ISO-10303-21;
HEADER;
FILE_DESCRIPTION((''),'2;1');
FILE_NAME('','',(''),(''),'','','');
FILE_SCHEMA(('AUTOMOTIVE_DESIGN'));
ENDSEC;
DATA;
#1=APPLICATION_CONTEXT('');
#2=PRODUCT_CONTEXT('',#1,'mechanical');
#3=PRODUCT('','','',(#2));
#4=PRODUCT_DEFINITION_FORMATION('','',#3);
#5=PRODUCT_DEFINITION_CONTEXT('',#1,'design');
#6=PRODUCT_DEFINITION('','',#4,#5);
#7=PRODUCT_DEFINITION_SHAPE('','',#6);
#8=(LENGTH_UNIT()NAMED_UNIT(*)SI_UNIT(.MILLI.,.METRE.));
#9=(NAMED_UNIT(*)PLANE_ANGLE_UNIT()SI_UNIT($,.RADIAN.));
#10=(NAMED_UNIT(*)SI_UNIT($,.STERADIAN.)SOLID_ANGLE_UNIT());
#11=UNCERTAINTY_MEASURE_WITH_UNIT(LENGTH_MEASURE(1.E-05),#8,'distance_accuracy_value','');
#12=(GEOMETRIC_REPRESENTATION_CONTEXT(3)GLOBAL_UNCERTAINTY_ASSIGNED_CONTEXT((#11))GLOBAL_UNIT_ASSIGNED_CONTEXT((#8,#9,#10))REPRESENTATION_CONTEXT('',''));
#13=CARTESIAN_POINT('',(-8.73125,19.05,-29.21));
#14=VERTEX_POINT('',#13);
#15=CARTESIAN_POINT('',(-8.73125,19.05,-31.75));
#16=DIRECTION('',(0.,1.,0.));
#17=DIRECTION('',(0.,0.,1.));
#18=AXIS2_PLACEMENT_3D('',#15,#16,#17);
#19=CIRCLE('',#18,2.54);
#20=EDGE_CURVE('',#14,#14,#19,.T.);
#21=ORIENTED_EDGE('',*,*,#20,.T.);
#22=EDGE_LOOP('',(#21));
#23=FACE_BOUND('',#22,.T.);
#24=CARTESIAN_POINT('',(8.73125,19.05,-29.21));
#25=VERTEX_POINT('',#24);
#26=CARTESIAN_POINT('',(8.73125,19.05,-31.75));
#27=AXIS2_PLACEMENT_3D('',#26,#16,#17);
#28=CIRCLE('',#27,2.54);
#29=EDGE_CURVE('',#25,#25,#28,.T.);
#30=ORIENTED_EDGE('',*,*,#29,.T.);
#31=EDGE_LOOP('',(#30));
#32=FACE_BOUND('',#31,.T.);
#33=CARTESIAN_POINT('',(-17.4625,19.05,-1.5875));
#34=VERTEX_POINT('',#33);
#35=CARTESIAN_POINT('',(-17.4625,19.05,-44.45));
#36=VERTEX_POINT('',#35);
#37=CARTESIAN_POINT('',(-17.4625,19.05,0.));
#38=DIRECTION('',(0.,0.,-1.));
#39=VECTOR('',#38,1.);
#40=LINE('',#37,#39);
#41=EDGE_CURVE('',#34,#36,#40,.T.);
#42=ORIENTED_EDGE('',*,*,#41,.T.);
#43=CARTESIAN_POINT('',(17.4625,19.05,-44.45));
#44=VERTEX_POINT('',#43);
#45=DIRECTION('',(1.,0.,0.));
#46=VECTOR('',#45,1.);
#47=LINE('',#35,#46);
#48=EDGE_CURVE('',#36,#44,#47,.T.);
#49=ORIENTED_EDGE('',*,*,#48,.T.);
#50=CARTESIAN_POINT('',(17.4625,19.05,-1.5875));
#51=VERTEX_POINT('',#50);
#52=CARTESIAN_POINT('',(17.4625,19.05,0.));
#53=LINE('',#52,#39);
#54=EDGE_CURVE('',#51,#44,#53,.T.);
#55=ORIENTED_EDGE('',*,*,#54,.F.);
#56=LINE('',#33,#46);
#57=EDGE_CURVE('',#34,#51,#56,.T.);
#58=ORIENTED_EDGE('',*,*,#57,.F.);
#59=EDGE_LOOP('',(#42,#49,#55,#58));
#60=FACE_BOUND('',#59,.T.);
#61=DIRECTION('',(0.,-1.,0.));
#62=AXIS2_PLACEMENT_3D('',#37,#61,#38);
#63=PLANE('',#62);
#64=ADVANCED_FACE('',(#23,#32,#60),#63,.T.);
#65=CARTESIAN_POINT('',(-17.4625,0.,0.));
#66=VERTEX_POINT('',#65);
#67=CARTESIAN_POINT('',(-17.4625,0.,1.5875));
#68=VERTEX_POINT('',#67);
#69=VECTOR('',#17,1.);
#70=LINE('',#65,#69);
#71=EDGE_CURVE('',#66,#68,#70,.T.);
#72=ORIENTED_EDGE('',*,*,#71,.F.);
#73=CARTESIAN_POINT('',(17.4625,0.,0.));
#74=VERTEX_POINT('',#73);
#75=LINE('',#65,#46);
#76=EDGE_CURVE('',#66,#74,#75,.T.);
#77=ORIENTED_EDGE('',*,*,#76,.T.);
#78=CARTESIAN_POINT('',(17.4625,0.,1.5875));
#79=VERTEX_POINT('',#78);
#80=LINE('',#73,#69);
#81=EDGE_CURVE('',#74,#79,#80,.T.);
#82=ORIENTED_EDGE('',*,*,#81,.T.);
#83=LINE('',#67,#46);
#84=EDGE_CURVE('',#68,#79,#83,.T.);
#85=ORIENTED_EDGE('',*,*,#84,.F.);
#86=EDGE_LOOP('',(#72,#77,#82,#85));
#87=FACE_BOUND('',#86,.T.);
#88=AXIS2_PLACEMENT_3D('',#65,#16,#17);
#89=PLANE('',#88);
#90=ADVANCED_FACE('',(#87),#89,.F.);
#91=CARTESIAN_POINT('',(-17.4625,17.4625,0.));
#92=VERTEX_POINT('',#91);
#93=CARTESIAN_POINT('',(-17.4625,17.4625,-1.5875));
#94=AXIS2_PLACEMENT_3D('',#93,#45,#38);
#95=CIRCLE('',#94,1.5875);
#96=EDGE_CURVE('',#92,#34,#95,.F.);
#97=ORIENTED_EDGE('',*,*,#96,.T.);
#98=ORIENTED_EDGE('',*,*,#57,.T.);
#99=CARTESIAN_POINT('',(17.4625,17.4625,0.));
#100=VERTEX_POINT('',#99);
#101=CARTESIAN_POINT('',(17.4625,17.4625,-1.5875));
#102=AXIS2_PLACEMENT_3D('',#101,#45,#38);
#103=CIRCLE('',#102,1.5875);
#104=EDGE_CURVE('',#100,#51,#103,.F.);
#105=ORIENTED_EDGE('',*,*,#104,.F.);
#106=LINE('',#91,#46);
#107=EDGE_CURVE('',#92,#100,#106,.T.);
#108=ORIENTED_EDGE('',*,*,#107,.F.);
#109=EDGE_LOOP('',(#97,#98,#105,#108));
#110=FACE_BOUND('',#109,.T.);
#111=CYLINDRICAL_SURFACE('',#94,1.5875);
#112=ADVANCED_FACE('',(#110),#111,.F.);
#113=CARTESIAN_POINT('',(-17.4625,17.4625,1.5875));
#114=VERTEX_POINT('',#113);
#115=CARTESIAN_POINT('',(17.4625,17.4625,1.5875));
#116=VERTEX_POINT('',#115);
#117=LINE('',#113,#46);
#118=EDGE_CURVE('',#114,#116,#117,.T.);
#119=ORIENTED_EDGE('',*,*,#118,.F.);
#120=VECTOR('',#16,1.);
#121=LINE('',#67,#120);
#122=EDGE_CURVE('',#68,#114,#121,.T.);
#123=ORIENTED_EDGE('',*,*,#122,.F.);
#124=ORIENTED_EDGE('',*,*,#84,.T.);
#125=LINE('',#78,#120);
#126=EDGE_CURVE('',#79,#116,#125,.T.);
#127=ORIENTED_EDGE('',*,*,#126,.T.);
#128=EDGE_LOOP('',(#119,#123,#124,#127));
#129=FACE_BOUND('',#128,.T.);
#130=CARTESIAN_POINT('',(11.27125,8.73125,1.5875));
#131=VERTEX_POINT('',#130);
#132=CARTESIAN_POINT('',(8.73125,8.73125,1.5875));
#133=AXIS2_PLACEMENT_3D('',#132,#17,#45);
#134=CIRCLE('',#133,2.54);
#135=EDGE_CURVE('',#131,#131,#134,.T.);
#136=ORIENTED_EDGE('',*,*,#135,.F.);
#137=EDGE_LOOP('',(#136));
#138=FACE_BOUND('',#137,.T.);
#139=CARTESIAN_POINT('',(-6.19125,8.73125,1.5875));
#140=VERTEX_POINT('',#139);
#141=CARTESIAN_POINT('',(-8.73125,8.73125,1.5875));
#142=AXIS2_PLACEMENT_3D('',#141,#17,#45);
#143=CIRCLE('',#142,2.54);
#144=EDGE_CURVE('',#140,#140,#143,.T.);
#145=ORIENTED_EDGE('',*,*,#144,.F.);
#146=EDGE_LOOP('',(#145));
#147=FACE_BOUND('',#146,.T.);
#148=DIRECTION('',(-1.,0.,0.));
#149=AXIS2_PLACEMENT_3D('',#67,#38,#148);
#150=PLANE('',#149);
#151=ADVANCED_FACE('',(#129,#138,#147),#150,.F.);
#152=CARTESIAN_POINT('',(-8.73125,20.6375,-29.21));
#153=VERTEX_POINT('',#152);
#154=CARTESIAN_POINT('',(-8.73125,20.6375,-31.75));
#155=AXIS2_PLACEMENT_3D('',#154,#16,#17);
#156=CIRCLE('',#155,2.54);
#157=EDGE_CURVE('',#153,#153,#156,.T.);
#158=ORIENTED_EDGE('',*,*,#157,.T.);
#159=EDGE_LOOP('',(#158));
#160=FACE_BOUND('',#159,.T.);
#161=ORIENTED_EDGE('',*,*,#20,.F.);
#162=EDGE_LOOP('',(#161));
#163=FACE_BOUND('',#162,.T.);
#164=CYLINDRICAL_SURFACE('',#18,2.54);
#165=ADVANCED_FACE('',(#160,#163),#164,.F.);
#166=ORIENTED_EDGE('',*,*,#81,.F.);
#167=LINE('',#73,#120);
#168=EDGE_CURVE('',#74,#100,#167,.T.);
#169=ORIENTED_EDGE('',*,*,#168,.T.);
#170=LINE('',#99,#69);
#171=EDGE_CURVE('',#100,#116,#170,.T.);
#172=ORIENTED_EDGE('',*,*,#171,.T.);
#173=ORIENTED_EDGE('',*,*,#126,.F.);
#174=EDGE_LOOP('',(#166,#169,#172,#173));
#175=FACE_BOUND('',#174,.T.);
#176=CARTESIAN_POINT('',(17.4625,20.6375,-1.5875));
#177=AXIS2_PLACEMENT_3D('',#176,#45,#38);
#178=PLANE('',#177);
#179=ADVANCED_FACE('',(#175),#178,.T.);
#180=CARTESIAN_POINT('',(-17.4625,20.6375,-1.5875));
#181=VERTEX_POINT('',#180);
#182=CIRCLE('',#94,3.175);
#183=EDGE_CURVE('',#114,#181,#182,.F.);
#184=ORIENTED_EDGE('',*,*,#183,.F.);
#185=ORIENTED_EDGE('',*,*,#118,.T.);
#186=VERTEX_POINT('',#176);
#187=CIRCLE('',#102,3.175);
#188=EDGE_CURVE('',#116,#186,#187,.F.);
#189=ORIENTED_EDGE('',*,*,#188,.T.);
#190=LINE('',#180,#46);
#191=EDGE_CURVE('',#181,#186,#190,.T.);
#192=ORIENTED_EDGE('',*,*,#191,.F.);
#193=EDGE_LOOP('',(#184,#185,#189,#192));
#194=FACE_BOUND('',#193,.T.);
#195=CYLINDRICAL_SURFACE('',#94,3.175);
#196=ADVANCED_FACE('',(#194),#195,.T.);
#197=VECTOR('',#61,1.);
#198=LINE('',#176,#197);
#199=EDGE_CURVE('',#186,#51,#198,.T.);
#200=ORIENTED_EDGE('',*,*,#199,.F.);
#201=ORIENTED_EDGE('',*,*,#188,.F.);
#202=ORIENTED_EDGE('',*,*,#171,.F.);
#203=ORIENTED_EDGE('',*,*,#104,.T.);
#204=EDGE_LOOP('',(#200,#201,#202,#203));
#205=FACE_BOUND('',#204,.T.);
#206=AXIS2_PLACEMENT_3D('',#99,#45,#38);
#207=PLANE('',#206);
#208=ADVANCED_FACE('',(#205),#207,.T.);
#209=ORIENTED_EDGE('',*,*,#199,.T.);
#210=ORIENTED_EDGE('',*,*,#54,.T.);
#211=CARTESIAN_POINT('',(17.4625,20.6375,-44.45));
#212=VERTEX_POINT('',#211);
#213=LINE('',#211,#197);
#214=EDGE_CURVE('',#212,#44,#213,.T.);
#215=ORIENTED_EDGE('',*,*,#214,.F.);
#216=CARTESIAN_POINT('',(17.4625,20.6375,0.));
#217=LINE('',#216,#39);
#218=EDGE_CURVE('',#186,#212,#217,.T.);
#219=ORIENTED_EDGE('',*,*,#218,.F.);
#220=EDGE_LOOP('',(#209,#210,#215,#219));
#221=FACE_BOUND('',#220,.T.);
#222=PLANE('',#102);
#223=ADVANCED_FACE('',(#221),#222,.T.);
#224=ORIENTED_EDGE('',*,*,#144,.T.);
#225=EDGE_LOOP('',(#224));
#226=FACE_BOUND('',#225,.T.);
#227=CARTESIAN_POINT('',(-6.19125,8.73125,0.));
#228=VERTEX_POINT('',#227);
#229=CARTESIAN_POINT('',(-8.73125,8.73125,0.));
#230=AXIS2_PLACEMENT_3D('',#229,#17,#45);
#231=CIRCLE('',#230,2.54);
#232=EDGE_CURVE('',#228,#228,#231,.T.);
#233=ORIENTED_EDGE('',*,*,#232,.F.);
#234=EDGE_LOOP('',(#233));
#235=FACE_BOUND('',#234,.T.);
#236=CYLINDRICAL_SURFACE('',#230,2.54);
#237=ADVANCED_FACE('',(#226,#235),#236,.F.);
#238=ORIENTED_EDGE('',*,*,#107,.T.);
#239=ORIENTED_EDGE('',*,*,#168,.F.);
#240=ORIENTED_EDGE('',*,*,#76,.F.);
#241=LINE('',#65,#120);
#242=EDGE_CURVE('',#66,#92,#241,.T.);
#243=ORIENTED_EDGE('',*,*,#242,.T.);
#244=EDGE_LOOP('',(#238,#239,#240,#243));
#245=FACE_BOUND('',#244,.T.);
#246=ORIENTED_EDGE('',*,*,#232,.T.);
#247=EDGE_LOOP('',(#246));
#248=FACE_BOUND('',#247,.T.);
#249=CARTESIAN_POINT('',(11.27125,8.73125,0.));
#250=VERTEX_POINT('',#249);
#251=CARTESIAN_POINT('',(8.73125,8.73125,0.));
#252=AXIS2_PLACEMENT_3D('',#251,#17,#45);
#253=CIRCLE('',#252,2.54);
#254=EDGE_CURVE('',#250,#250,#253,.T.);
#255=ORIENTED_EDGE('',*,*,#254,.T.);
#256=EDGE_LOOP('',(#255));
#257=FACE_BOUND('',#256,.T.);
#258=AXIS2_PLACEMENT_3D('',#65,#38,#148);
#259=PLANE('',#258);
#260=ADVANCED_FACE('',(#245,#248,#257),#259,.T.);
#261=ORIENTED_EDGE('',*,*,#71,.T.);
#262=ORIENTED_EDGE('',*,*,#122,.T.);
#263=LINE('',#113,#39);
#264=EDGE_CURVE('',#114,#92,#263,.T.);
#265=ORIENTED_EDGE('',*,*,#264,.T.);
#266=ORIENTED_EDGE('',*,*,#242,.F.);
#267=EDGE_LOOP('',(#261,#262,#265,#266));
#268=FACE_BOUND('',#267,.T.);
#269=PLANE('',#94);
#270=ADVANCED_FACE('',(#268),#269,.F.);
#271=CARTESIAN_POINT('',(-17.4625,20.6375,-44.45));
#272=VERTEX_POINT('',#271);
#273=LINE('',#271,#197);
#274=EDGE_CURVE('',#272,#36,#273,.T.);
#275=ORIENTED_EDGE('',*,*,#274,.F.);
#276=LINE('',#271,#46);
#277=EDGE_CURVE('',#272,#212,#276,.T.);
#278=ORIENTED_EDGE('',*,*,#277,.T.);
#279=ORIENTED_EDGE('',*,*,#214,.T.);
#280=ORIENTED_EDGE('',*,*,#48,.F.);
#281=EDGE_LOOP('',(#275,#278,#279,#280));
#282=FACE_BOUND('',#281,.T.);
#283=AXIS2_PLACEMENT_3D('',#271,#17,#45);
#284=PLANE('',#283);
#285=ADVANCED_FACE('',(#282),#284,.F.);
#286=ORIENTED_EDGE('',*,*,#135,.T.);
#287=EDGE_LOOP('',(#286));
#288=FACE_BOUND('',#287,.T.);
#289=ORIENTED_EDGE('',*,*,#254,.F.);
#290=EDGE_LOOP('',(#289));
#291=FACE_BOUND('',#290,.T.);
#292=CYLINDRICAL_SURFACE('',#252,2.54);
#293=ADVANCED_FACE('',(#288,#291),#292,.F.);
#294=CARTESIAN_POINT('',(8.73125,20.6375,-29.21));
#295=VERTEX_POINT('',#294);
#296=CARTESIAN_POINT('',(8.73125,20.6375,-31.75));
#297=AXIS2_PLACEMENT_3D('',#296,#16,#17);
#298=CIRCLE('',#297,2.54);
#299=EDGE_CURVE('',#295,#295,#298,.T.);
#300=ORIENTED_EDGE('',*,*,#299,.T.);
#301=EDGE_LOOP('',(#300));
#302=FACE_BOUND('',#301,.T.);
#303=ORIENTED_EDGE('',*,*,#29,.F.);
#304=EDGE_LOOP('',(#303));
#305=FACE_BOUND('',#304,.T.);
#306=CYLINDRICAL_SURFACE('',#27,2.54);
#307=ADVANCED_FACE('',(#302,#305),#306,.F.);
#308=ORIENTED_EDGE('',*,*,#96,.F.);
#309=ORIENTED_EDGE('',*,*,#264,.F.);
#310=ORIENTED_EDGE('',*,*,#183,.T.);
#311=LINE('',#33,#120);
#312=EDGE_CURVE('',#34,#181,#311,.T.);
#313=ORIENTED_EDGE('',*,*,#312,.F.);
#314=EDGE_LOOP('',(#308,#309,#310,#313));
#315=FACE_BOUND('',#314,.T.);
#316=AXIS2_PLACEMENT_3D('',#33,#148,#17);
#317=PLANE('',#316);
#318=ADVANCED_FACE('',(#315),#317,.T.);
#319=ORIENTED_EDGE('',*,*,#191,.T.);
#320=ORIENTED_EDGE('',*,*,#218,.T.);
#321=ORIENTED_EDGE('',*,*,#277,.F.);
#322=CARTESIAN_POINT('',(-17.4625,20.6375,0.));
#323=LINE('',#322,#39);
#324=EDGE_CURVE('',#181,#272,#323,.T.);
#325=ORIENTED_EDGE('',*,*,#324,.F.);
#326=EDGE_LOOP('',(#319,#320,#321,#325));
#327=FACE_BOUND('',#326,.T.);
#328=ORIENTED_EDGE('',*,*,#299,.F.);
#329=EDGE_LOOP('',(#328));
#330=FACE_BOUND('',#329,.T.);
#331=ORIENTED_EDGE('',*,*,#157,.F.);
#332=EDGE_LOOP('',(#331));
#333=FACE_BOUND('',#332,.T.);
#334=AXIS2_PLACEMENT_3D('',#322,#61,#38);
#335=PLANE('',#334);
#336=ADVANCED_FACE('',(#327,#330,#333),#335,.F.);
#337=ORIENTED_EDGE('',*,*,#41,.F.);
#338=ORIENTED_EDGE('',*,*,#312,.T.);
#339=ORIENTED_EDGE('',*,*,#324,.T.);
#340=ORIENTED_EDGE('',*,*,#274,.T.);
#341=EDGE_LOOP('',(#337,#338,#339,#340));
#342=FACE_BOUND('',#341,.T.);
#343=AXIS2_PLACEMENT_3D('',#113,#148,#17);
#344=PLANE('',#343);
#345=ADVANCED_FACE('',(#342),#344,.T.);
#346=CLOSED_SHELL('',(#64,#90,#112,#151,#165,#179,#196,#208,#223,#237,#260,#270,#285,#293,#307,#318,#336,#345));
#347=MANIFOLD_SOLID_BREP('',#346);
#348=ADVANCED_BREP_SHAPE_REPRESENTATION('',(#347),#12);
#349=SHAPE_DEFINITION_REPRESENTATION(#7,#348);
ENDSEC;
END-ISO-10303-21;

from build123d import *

# Parameters (mm, degrees)
BASE_FLANGE1_DEPTH = 17.4625
SKETCH6_R          = 2.54
CUT_EXTRUDE1_DEPTH = 2.54
SKETCH7_R          = 2.54
CUT_EXTRUDE2_DEPTH = 2.54


# Sheet-metal steps are written as plain solids
with BuildPart() as part:
    # Sketch1 → Base-Flange1 (new, symmetric)
    with BuildSketch(Plane(origin=(0, 0, 0), x_dir=(0, 0, -1), z_dir=(1, 0, 0))):
        with BuildLine():
            Line((0, 0), (0, 17.4625))
            ThreePointArc((0, 17.4625), (0.464967985, 18.585032015), (1.5875, 19.05))
            Line((1.5875, 19.05), (44.45, 19.05))
            Line((44.45, 19.05), (44.45, 20.6375))
            Line((44.45, 20.6375), (1.5875, 20.6375))
            ThreePointArc((1.5875, 20.6375), (-0.65756403, 19.70756403), (-1.5875, 17.4625))
            Line((-1.5875, 17.4625), (-1.5875, 0))
            Line((-1.5875, 0), (0, 0))
        make_face()
    extrude(amount=BASE_FLANGE1_DEPTH, both=True)

    # Sketch6 → Cut-Extrude1 (cut)
    with BuildSketch(Plane.XY.offset(1.5875)):
        with Locations((-8.73125, 8.73125)):
            Circle(SKETCH6_R)
        with Locations((8.73125, 8.73125)):
            Circle(SKETCH6_R)
    extrude(amount=-CUT_EXTRUDE1_DEPTH, mode=Mode.SUBTRACT)

    # Sketch7 → Cut-Extrude2 (cut)
    with BuildSketch(Plane(origin=(0, 20.6375, 0), x_dir=(1, 0, 0), z_dir=(0, 1, 0))):
        with Locations(Location((-8.73125, 31.75, 0), (0, 0, 270))):
            Circle(SKETCH7_R)
        with Locations(Location((8.73125, 31.75, 0), (0, 0, 270))):
            Circle(SKETCH7_R)
    extrude(amount=-CUT_EXTRUDE2_DEPTH, mode=Mode.SUBTRACT)


solid = part.part
